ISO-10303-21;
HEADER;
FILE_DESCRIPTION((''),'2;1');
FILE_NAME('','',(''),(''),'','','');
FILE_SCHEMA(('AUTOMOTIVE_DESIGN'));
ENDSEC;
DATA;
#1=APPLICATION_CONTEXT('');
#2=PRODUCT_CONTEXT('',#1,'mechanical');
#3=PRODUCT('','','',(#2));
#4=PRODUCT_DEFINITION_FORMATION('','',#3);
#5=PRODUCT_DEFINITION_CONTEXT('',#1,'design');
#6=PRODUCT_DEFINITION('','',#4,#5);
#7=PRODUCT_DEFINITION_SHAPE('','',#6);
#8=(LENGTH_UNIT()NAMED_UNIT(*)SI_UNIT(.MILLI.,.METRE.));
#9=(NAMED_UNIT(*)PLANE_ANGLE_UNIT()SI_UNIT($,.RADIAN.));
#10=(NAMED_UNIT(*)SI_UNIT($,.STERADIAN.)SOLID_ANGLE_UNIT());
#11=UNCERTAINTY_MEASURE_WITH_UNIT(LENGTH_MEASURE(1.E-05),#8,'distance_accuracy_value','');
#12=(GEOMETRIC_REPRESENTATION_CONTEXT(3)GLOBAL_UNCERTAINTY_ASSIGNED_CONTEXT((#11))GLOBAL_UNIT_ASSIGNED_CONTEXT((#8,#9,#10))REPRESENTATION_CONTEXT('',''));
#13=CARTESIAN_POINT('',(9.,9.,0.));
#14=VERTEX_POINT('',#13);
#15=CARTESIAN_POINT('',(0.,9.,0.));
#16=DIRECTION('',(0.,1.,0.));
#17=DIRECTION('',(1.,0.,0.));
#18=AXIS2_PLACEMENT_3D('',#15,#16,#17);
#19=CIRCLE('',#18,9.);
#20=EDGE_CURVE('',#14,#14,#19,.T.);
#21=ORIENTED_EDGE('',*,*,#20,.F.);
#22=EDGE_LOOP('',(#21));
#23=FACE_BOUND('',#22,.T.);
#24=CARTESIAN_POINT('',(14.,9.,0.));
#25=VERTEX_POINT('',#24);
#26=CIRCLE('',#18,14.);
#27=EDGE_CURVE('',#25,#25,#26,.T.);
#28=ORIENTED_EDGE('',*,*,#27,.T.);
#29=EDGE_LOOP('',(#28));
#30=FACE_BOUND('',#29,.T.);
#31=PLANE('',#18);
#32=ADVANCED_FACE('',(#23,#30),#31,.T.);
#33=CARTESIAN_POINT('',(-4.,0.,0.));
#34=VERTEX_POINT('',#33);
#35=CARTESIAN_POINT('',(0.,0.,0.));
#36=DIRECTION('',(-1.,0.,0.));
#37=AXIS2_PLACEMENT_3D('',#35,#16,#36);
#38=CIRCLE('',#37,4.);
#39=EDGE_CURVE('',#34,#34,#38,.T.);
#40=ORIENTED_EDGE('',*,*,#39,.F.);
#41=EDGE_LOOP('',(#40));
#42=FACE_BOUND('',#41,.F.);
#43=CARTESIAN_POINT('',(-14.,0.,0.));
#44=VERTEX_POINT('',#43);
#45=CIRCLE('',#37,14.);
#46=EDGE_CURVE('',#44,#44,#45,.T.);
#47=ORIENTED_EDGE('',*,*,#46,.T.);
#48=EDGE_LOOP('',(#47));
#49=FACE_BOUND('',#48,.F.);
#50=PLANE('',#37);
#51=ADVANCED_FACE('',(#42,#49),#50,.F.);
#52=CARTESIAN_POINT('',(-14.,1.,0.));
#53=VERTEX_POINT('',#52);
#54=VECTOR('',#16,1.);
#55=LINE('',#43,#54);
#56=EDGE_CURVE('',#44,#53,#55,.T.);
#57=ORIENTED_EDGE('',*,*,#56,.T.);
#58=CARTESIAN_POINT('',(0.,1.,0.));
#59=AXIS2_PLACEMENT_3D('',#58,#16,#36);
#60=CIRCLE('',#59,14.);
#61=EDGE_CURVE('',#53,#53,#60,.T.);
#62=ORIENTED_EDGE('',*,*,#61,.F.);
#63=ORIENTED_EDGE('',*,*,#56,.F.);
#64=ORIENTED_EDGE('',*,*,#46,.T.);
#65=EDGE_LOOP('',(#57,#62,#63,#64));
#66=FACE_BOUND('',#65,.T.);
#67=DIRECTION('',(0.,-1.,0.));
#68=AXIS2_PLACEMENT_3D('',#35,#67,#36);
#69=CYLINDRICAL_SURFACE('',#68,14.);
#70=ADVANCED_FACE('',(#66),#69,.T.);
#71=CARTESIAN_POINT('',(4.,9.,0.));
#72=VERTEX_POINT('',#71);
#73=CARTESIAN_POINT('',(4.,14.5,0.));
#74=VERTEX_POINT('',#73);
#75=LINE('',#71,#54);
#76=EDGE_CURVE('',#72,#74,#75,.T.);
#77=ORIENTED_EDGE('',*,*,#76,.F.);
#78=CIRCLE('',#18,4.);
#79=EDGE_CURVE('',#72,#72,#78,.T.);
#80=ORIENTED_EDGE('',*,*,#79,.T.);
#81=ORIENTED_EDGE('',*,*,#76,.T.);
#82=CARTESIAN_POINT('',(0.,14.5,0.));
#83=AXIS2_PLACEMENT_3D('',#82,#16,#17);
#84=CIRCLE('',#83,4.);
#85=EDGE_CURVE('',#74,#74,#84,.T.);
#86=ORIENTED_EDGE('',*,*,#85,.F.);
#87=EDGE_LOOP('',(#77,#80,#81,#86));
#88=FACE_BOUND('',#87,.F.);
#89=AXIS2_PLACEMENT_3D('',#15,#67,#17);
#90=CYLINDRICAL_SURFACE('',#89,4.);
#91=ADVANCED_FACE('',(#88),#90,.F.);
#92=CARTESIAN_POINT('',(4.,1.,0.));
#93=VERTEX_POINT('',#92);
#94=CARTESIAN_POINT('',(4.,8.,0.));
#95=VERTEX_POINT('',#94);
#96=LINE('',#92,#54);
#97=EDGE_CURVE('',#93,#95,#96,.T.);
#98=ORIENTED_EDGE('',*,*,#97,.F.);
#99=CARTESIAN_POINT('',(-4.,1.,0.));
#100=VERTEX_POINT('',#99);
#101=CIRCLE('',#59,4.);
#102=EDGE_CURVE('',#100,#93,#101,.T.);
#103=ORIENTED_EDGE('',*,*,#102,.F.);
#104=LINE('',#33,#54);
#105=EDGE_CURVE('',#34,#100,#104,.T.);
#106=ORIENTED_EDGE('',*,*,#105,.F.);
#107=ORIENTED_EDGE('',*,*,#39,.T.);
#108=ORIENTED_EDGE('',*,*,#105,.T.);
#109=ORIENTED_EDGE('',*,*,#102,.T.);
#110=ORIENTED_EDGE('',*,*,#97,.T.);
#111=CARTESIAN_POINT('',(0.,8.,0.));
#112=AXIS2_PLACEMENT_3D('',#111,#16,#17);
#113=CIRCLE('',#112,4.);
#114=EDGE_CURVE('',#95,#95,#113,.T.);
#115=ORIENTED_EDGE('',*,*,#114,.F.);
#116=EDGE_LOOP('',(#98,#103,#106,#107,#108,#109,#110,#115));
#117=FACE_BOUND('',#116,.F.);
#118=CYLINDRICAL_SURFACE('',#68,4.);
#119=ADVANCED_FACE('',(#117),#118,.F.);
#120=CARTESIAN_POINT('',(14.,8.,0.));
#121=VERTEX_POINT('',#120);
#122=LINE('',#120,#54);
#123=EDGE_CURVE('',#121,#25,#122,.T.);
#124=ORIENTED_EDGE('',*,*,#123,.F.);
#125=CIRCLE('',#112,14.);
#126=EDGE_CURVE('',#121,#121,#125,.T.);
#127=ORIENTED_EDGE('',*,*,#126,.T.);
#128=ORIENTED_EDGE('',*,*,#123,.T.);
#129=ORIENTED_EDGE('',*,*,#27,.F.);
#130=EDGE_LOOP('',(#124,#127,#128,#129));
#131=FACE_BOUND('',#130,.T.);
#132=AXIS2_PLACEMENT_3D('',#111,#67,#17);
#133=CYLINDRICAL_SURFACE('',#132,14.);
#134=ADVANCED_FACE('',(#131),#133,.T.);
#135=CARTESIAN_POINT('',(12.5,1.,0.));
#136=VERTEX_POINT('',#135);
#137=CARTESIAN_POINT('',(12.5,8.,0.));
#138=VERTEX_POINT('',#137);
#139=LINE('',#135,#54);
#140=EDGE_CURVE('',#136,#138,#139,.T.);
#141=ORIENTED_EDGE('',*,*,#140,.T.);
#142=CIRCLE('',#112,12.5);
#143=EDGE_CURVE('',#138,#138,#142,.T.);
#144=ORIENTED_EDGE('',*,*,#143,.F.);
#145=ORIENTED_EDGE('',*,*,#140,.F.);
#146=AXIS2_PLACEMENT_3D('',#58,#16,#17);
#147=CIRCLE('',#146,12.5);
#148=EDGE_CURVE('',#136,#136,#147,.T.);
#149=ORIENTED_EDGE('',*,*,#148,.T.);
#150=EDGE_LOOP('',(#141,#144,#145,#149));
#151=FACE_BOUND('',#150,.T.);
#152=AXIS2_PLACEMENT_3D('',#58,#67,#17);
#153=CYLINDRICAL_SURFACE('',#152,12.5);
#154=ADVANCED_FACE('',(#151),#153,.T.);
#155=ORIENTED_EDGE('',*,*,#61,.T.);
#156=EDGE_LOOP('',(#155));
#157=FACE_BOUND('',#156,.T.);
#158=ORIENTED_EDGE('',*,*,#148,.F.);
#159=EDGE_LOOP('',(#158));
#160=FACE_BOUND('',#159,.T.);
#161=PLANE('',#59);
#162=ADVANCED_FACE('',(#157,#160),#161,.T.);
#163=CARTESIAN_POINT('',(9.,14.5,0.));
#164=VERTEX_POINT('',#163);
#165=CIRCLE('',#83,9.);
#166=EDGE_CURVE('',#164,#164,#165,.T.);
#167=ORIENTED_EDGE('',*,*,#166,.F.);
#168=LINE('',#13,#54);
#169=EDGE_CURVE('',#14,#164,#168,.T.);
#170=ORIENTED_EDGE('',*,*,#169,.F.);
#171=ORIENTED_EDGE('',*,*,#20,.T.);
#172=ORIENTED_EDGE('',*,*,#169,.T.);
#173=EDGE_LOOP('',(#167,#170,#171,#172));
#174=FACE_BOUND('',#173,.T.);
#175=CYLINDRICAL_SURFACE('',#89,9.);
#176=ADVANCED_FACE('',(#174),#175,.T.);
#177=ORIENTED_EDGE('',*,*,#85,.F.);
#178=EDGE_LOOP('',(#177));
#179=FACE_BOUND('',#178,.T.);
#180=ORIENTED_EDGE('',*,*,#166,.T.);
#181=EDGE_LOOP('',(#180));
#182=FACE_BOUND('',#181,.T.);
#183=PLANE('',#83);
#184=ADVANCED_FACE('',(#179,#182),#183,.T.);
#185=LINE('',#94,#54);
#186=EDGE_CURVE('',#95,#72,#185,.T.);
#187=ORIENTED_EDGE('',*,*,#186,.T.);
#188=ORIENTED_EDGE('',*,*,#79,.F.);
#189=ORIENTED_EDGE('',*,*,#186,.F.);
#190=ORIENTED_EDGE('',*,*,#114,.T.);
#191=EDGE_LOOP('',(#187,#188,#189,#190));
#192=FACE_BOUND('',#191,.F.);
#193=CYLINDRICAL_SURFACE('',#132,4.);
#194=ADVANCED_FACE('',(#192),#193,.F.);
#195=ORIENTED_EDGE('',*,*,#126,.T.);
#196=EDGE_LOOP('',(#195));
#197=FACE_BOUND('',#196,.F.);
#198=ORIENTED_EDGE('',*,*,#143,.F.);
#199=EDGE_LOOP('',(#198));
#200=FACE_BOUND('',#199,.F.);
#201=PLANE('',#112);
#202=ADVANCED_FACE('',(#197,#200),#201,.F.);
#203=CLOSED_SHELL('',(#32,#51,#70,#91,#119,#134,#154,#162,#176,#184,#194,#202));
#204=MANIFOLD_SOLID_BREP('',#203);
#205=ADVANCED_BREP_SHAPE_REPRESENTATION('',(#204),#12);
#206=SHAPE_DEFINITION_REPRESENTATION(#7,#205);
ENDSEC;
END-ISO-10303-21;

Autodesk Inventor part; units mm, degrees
ref_plane "YZ Plane" through (0, 0, 0) normal (1, 0, 0) x (0, 1, 0)
ref_plane "XZ Plane" through (0, 0, 0) normal (0, 1, 0) x (-1, 0, 0)
ref_plane "XY Plane" through (0, 0, 0) normal (0, 0, 1) x (1, 0, 0)
sketch "Sketch1" plane through (0, 0, 0) normal (0, 1, 0) x (-1, 0, 0)
  circle A0 centre (0, 0) radius 4
  circle A1 centre (0, 0) radius 14
  dimension "d0" = 28
  dimension "d1" = 8
extrude "Extrusion1" add sketch "Sketch1" along normal blind 1
sketch "Sketch2" plane through (0, 1, 0) normal (0, 1, 0) x (1, 0, 0)
  circle A0 centre (0, 0) radius 4
  circle A1 centre (0, 0) radius 12.5
  dimension "d4" = 25
  dimension "d7" = 8
extrude "Extrusion2" add sketch "Sketch2" along normal blind 7
sketch "Sketch3" plane through (0, 8, 0) normal (0, 1, 0) x (1, 0, 0)
  circle A0 centre (0, 0) radius 4
  circle A1 centre (0, 0) radius 14
extrude "Extrusion3" add sketch "Sketch3" along normal blind 1
sketch "Sketch4" plane through (0, 9, 0) normal (0, 1, 0) x (1, 0, 0)
  circle A0 centre (0, 0) radius 4
  circle A1 centre (0, 0) radius 9
  circle A2 centre (0, 0) radius 4 projected
  dimension "d10" = 18
extrude "Extrusion4" add sketch "Sketch4" along normal blind 5.5
properties part number "big_gear"
